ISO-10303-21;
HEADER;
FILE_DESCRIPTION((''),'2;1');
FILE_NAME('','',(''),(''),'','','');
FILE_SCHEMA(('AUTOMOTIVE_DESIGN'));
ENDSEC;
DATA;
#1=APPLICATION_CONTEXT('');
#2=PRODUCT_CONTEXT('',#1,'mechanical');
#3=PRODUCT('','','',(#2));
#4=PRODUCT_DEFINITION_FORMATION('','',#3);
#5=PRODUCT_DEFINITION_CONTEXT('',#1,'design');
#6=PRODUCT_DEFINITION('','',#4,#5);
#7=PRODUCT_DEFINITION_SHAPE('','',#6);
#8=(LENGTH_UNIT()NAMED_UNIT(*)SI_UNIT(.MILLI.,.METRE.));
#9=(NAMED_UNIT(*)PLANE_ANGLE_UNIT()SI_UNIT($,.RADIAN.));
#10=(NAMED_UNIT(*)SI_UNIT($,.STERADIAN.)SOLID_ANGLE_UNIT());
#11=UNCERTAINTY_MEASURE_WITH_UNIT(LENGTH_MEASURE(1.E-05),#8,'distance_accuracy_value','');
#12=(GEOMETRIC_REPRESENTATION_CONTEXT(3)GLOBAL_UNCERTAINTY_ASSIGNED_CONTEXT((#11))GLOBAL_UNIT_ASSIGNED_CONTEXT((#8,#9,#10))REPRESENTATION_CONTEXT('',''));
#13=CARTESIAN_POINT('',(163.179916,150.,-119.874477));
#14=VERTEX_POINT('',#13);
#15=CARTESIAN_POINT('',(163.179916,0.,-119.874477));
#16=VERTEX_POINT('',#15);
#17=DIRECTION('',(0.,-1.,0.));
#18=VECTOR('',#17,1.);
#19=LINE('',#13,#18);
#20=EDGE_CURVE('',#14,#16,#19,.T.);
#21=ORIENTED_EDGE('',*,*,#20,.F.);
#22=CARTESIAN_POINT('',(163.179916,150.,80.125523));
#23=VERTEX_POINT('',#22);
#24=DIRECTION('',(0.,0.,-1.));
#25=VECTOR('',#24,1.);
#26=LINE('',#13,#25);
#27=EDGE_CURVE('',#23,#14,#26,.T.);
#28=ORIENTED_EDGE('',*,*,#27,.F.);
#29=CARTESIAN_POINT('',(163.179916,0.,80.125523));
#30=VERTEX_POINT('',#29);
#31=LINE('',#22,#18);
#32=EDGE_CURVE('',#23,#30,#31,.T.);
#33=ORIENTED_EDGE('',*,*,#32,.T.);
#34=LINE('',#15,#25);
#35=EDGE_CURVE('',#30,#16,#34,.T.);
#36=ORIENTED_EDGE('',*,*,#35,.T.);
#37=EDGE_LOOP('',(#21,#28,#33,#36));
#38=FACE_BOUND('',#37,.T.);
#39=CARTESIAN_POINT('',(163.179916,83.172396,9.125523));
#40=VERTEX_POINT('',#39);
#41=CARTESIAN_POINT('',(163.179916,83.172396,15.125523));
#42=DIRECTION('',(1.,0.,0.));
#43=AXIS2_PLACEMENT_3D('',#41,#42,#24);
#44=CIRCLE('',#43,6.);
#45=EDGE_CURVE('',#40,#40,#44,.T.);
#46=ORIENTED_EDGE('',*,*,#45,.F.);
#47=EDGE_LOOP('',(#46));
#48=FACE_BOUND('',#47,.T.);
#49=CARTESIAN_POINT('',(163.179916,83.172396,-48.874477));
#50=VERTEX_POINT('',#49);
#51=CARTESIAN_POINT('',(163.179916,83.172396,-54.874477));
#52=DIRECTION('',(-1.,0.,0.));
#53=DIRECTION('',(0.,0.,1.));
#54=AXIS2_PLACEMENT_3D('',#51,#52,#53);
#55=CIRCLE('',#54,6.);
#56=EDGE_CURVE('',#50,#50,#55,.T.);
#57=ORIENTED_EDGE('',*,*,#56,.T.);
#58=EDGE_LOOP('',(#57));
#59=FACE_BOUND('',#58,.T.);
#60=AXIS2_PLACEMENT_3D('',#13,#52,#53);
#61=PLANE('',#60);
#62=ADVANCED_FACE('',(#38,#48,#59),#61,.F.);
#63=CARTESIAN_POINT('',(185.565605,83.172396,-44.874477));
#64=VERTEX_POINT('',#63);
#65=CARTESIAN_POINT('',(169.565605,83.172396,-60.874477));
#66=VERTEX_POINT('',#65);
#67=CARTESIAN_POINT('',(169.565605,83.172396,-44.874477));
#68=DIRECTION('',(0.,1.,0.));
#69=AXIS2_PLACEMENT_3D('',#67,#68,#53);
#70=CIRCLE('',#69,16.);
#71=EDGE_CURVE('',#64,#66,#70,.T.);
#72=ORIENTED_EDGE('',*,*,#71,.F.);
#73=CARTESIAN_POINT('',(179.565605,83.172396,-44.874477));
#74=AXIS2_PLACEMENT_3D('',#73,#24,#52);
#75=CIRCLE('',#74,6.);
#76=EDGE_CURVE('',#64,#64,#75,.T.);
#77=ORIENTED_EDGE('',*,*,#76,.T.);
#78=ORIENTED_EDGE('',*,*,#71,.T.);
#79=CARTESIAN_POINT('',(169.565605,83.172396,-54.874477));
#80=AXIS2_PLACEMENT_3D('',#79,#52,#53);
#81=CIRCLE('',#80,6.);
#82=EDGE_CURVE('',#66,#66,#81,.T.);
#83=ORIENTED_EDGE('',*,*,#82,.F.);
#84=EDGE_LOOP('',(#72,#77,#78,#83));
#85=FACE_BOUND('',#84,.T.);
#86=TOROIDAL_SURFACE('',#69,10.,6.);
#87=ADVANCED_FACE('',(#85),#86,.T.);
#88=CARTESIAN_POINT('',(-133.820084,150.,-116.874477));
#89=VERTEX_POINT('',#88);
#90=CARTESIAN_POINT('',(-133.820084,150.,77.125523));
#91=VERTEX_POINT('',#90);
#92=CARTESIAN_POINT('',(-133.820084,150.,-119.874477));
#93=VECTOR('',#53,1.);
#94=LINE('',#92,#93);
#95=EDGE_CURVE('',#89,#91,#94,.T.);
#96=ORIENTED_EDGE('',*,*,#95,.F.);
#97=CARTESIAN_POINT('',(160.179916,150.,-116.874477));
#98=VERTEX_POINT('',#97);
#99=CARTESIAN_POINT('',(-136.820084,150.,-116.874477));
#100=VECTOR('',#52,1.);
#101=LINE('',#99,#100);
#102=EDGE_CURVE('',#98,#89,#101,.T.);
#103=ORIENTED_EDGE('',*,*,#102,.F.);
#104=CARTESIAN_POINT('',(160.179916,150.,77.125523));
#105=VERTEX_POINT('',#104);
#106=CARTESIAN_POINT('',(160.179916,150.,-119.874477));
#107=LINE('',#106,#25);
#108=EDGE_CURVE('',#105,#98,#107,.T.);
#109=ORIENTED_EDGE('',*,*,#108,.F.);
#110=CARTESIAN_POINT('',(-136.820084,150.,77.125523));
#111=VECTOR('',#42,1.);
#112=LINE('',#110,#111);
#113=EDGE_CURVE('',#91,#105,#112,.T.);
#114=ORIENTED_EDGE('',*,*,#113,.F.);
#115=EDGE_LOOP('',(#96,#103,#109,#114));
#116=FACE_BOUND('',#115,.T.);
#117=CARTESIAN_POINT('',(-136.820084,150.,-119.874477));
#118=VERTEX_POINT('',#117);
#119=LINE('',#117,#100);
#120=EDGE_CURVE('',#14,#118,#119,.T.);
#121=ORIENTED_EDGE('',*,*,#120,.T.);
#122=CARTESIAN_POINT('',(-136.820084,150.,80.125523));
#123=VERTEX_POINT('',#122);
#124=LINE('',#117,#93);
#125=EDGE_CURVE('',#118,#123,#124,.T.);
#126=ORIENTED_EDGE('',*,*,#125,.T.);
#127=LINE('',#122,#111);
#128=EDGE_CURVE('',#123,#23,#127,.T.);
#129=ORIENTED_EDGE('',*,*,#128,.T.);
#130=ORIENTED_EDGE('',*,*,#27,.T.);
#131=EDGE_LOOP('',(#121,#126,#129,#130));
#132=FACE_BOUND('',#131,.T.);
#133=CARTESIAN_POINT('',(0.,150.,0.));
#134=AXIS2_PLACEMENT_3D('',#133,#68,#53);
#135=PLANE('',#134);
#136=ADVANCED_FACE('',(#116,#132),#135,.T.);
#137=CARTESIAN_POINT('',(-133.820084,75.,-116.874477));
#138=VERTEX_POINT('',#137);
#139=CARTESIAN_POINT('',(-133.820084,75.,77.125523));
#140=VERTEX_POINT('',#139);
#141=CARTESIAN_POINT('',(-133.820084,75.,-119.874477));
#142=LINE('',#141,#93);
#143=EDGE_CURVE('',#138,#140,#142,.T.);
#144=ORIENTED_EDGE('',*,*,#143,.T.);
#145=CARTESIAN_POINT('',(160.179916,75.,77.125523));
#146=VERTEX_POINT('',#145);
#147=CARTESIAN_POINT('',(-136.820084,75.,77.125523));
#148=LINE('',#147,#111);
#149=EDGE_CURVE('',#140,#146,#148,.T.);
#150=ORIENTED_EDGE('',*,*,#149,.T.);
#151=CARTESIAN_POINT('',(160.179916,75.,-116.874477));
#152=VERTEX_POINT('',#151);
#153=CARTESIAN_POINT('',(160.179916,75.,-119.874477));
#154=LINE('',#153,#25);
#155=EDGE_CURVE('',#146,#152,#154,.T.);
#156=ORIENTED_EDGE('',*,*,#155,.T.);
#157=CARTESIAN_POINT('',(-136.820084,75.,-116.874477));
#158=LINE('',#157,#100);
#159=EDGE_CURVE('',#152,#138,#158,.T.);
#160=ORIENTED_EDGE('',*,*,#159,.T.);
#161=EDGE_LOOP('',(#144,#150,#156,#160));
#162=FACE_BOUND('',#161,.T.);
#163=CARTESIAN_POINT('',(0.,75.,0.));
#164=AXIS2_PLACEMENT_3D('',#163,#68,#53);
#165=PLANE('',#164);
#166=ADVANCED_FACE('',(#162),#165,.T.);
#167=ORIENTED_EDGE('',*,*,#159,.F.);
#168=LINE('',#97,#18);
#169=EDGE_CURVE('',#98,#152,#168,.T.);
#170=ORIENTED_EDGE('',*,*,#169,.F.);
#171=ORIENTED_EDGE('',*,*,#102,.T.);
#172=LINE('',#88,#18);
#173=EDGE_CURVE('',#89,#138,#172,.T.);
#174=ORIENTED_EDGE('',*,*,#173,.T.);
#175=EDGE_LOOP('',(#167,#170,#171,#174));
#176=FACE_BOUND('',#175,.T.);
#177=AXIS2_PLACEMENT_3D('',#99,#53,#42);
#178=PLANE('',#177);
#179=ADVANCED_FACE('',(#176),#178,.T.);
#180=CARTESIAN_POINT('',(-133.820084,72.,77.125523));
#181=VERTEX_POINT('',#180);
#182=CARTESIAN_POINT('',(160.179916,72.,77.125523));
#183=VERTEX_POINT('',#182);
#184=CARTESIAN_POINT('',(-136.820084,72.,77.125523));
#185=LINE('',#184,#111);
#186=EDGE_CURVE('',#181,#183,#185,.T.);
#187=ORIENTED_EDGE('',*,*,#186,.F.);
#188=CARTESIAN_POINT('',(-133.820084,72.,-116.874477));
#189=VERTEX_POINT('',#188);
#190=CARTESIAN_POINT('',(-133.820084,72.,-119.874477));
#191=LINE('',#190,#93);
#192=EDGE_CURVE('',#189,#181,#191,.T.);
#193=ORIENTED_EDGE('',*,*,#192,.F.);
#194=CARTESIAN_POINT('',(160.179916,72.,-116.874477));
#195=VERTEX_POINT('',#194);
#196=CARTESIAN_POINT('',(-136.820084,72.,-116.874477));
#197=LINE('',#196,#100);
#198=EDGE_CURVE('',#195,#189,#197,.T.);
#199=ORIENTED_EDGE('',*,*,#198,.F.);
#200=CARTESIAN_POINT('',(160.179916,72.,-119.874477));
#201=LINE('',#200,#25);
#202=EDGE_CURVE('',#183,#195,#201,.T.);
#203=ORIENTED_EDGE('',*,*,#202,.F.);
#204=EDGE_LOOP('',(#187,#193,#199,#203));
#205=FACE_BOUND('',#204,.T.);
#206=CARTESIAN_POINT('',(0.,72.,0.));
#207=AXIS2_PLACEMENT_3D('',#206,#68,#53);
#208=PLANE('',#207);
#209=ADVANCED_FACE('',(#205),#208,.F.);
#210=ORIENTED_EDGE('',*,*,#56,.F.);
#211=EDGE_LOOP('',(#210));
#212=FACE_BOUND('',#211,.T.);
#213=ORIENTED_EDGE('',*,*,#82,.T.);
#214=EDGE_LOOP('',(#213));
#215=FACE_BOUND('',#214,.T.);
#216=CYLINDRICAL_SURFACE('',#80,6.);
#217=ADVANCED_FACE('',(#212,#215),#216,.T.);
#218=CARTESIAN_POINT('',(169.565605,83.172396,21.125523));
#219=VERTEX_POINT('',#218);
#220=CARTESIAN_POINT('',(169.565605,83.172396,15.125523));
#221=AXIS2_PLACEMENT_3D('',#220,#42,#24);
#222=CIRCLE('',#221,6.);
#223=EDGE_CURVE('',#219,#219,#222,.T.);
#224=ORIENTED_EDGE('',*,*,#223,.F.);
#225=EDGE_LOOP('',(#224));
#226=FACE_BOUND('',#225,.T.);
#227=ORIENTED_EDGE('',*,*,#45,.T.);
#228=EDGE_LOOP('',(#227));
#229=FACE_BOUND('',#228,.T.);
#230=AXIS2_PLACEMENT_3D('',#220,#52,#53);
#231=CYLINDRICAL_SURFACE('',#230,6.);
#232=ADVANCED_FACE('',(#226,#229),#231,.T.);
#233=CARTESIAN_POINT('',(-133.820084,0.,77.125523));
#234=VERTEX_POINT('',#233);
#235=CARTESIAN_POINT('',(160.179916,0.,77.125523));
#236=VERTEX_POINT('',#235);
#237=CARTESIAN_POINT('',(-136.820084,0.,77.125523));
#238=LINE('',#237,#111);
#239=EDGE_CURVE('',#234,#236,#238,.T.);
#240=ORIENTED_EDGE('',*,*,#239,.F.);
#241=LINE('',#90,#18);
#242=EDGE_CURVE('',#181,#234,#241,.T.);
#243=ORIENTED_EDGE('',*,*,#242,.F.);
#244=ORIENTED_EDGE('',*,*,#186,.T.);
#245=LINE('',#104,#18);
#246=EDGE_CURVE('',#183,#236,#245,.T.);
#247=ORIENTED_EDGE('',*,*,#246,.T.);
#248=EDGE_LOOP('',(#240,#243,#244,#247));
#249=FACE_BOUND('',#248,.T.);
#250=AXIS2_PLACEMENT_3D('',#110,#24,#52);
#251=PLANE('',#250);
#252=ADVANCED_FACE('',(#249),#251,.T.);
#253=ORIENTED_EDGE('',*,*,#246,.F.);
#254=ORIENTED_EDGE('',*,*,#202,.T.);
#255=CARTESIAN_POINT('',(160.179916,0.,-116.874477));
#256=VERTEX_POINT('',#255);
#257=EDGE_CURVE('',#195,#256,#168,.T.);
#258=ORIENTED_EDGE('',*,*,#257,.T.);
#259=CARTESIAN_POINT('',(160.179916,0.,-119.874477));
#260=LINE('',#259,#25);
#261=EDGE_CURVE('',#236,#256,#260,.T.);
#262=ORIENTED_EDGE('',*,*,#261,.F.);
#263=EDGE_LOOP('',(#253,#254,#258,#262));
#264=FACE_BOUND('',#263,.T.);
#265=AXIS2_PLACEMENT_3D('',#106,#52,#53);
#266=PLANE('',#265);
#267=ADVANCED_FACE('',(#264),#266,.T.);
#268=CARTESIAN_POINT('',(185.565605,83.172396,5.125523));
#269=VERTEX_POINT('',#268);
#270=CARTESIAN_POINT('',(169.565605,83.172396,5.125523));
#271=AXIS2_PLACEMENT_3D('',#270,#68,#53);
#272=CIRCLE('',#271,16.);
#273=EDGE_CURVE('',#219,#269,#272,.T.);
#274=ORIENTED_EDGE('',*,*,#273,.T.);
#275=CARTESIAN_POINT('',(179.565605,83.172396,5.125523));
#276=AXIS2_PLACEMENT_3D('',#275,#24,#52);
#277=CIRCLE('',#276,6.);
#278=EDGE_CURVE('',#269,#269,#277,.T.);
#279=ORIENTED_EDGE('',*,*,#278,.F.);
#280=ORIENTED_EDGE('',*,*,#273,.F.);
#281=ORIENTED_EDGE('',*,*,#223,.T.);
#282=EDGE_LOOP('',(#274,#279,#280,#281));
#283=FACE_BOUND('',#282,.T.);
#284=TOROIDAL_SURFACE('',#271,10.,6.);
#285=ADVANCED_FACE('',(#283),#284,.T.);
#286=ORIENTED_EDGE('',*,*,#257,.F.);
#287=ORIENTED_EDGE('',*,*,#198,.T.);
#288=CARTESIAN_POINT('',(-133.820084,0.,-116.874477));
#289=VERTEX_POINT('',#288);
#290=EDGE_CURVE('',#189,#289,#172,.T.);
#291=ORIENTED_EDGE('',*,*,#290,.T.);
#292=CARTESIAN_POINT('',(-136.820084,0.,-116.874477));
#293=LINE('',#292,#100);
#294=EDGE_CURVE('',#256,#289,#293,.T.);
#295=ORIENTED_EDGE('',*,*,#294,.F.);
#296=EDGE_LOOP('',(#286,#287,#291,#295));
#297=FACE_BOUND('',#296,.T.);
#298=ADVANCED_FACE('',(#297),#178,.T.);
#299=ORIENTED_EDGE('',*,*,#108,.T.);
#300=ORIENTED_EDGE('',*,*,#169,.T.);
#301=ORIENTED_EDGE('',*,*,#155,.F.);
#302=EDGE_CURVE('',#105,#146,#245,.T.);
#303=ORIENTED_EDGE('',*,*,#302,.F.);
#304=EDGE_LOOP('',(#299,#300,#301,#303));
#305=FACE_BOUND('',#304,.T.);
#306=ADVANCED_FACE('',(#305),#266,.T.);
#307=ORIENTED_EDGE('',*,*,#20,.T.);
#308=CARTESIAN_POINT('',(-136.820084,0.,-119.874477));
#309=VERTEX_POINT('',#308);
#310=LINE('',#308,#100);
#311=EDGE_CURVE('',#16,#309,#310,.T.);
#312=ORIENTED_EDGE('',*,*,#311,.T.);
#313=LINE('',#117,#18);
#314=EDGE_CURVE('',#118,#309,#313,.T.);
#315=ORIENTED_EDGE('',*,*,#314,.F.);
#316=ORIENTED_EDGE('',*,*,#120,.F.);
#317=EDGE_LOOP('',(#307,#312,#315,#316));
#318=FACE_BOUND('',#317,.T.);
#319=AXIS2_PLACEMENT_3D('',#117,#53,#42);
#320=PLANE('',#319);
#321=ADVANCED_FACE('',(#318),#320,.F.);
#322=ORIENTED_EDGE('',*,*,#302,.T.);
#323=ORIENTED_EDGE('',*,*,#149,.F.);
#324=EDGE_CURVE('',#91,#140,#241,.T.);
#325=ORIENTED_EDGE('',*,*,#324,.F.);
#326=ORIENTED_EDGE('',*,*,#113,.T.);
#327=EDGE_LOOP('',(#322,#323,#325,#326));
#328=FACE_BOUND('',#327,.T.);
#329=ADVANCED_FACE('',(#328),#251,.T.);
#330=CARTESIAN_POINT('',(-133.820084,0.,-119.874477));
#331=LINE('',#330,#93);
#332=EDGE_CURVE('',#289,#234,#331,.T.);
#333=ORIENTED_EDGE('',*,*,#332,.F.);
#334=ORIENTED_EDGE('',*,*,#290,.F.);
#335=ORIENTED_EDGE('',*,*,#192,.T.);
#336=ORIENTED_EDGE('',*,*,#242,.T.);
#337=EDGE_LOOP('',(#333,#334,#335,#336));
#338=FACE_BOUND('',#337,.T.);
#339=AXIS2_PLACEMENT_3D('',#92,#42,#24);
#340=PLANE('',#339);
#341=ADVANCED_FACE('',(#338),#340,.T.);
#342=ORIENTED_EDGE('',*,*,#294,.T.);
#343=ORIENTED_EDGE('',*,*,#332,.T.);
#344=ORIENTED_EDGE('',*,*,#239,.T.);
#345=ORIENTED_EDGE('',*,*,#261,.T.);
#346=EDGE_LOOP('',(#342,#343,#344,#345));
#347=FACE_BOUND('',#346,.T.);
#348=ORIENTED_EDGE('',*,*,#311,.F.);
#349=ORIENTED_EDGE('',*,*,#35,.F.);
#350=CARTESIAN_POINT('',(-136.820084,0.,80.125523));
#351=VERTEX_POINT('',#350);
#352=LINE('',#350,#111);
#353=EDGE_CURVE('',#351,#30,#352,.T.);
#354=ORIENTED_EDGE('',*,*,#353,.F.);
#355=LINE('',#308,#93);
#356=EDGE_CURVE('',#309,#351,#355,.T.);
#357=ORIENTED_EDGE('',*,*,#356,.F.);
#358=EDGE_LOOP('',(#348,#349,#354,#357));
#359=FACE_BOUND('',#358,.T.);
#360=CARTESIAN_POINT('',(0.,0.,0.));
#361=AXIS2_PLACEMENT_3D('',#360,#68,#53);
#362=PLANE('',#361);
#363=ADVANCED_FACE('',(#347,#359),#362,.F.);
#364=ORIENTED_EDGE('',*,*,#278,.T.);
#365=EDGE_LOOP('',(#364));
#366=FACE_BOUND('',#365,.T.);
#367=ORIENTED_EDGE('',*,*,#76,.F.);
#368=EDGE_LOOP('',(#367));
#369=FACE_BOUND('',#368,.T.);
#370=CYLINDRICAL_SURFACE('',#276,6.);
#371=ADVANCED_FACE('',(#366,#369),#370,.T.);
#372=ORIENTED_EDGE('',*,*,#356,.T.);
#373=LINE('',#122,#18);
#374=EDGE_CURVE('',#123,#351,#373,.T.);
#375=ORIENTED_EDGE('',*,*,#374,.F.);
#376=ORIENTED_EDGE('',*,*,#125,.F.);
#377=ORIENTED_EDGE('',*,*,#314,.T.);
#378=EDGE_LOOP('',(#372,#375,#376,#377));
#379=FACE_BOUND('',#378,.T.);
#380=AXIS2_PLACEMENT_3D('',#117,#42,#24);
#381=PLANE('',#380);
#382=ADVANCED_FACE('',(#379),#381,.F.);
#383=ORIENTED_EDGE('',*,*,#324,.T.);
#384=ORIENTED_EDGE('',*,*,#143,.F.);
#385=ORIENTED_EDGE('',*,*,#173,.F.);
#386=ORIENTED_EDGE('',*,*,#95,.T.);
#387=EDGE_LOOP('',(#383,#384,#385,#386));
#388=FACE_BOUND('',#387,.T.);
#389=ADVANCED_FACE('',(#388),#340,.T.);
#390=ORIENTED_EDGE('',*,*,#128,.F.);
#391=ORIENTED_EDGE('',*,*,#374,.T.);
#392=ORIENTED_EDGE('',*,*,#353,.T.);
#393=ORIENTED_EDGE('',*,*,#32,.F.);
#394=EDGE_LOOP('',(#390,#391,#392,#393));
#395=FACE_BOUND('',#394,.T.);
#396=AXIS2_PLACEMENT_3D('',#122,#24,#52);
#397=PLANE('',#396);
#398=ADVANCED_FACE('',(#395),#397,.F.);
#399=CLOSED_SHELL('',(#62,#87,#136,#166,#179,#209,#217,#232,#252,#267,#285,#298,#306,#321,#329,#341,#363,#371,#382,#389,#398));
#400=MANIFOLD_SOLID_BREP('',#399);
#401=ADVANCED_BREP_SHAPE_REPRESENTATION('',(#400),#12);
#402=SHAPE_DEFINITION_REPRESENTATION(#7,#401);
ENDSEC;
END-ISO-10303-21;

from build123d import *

# Parameters (mm, degrees)
SKETCH1_W                 = 300
SKETCH1_H                 = 200
BOSS_EXTRUDE1_DEPTH       = 150
SHELL1_T                  = -3
SHELL1_THICKNESS_2_FACE_W = 194
SHELL1_THICKNESS_2_FACE_H = 294
SHELL1_THICKNESS_2_DEPTH  = 72
SHELL2_START              = -133.820083682
SHELL2_OUTLINE_W          = 72
SHELL2_OUTLINE_H          = 194
SHELL2_DEPTH              = 294
SKETCH2_R                 = 6


# Read off the part's stored shape, not the designer's step: Shell2
with BuildPart() as part:
    # Sketch1 → Boss-Extrude1 (new body)
    with BuildSketch(Plane(origin=(0, 0, 0), x_dir=(1, 0, 0), z_dir=(0, 1, 0))):
        with Locations((13.179916318, 19.874476987)):
            Rectangle(SKETCH1_W, SKETCH1_H)
    extrude(amount=BOSS_EXTRUDE1_DEPTH)

    # Shell1
    shell1_openings = [part.faces().sort_by_distance(p)[0] for p in [
        (13.179916318, 150, -19.874476987),
    ]]
    offset(amount=SHELL1_T, openings=shell1_openings, kind=Kind.INTERSECTION)

    # Shell1 thickness 2 face (on inner face of the shell) → Shell1 thickness 2 (add)
    with BuildSketch(Plane(origin=(13.179916318, 3, -19.874476987), x_dir=(0, 0, -1), z_dir=(0, -1, 0))):
        Rectangle(SHELL1_THICKNESS_2_FACE_W, SHELL1_THICKNESS_2_FACE_H)
    extrude(amount=-SHELL1_THICKNESS_2_DEPTH)

    # Shell2 outline → Shell2 (cut)
    with BuildSketch(Plane.YZ.offset(SHELL2_START)):
        with Locations((36, -19.874476987)):
            Rectangle(SHELL2_OUTLINE_W, SHELL2_OUTLINE_H)
    extrude(amount=SHELL2_DEPTH, mode=Mode.SUBTRACT)

    # Sweep2: sweep along a path in Sketch4
    with BuildLine(Plane(origin=(0, 83.172395684, 0), x_dir=(1, 0, 0), z_dir=(0, 1, 0))) as sweep2_path:
        Line((163.179916318, -15.125523013), (169.565605174, -15.125523013))
        ThreePointArc((169.565605174, -15.125523013), (176.636672985, -12.196590824), (179.565605174, -5.125523013))
        Line((179.565605174, -5.125523013), (179.565605174, 44.874476987))
        ThreePointArc((179.565605174, 44.874476987), (176.636672985, 51.945544799), (169.565605174, 54.874476987))
        Line((169.565605174, 54.874476987), (163.179916318, 54.874476987))
    # Sketch2 → Sweep2 (sweep)
    with BuildSketch(Plane(origin=(163.179916318, 0, 0), x_dir=(0, 0, -1), z_dir=(1, 0, 0))):
        with Locations((-15.125523013, 83.172395684)):
            Circle(SKETCH2_R)
    sweep(path=sweep2_path.line)


solid = part.part
